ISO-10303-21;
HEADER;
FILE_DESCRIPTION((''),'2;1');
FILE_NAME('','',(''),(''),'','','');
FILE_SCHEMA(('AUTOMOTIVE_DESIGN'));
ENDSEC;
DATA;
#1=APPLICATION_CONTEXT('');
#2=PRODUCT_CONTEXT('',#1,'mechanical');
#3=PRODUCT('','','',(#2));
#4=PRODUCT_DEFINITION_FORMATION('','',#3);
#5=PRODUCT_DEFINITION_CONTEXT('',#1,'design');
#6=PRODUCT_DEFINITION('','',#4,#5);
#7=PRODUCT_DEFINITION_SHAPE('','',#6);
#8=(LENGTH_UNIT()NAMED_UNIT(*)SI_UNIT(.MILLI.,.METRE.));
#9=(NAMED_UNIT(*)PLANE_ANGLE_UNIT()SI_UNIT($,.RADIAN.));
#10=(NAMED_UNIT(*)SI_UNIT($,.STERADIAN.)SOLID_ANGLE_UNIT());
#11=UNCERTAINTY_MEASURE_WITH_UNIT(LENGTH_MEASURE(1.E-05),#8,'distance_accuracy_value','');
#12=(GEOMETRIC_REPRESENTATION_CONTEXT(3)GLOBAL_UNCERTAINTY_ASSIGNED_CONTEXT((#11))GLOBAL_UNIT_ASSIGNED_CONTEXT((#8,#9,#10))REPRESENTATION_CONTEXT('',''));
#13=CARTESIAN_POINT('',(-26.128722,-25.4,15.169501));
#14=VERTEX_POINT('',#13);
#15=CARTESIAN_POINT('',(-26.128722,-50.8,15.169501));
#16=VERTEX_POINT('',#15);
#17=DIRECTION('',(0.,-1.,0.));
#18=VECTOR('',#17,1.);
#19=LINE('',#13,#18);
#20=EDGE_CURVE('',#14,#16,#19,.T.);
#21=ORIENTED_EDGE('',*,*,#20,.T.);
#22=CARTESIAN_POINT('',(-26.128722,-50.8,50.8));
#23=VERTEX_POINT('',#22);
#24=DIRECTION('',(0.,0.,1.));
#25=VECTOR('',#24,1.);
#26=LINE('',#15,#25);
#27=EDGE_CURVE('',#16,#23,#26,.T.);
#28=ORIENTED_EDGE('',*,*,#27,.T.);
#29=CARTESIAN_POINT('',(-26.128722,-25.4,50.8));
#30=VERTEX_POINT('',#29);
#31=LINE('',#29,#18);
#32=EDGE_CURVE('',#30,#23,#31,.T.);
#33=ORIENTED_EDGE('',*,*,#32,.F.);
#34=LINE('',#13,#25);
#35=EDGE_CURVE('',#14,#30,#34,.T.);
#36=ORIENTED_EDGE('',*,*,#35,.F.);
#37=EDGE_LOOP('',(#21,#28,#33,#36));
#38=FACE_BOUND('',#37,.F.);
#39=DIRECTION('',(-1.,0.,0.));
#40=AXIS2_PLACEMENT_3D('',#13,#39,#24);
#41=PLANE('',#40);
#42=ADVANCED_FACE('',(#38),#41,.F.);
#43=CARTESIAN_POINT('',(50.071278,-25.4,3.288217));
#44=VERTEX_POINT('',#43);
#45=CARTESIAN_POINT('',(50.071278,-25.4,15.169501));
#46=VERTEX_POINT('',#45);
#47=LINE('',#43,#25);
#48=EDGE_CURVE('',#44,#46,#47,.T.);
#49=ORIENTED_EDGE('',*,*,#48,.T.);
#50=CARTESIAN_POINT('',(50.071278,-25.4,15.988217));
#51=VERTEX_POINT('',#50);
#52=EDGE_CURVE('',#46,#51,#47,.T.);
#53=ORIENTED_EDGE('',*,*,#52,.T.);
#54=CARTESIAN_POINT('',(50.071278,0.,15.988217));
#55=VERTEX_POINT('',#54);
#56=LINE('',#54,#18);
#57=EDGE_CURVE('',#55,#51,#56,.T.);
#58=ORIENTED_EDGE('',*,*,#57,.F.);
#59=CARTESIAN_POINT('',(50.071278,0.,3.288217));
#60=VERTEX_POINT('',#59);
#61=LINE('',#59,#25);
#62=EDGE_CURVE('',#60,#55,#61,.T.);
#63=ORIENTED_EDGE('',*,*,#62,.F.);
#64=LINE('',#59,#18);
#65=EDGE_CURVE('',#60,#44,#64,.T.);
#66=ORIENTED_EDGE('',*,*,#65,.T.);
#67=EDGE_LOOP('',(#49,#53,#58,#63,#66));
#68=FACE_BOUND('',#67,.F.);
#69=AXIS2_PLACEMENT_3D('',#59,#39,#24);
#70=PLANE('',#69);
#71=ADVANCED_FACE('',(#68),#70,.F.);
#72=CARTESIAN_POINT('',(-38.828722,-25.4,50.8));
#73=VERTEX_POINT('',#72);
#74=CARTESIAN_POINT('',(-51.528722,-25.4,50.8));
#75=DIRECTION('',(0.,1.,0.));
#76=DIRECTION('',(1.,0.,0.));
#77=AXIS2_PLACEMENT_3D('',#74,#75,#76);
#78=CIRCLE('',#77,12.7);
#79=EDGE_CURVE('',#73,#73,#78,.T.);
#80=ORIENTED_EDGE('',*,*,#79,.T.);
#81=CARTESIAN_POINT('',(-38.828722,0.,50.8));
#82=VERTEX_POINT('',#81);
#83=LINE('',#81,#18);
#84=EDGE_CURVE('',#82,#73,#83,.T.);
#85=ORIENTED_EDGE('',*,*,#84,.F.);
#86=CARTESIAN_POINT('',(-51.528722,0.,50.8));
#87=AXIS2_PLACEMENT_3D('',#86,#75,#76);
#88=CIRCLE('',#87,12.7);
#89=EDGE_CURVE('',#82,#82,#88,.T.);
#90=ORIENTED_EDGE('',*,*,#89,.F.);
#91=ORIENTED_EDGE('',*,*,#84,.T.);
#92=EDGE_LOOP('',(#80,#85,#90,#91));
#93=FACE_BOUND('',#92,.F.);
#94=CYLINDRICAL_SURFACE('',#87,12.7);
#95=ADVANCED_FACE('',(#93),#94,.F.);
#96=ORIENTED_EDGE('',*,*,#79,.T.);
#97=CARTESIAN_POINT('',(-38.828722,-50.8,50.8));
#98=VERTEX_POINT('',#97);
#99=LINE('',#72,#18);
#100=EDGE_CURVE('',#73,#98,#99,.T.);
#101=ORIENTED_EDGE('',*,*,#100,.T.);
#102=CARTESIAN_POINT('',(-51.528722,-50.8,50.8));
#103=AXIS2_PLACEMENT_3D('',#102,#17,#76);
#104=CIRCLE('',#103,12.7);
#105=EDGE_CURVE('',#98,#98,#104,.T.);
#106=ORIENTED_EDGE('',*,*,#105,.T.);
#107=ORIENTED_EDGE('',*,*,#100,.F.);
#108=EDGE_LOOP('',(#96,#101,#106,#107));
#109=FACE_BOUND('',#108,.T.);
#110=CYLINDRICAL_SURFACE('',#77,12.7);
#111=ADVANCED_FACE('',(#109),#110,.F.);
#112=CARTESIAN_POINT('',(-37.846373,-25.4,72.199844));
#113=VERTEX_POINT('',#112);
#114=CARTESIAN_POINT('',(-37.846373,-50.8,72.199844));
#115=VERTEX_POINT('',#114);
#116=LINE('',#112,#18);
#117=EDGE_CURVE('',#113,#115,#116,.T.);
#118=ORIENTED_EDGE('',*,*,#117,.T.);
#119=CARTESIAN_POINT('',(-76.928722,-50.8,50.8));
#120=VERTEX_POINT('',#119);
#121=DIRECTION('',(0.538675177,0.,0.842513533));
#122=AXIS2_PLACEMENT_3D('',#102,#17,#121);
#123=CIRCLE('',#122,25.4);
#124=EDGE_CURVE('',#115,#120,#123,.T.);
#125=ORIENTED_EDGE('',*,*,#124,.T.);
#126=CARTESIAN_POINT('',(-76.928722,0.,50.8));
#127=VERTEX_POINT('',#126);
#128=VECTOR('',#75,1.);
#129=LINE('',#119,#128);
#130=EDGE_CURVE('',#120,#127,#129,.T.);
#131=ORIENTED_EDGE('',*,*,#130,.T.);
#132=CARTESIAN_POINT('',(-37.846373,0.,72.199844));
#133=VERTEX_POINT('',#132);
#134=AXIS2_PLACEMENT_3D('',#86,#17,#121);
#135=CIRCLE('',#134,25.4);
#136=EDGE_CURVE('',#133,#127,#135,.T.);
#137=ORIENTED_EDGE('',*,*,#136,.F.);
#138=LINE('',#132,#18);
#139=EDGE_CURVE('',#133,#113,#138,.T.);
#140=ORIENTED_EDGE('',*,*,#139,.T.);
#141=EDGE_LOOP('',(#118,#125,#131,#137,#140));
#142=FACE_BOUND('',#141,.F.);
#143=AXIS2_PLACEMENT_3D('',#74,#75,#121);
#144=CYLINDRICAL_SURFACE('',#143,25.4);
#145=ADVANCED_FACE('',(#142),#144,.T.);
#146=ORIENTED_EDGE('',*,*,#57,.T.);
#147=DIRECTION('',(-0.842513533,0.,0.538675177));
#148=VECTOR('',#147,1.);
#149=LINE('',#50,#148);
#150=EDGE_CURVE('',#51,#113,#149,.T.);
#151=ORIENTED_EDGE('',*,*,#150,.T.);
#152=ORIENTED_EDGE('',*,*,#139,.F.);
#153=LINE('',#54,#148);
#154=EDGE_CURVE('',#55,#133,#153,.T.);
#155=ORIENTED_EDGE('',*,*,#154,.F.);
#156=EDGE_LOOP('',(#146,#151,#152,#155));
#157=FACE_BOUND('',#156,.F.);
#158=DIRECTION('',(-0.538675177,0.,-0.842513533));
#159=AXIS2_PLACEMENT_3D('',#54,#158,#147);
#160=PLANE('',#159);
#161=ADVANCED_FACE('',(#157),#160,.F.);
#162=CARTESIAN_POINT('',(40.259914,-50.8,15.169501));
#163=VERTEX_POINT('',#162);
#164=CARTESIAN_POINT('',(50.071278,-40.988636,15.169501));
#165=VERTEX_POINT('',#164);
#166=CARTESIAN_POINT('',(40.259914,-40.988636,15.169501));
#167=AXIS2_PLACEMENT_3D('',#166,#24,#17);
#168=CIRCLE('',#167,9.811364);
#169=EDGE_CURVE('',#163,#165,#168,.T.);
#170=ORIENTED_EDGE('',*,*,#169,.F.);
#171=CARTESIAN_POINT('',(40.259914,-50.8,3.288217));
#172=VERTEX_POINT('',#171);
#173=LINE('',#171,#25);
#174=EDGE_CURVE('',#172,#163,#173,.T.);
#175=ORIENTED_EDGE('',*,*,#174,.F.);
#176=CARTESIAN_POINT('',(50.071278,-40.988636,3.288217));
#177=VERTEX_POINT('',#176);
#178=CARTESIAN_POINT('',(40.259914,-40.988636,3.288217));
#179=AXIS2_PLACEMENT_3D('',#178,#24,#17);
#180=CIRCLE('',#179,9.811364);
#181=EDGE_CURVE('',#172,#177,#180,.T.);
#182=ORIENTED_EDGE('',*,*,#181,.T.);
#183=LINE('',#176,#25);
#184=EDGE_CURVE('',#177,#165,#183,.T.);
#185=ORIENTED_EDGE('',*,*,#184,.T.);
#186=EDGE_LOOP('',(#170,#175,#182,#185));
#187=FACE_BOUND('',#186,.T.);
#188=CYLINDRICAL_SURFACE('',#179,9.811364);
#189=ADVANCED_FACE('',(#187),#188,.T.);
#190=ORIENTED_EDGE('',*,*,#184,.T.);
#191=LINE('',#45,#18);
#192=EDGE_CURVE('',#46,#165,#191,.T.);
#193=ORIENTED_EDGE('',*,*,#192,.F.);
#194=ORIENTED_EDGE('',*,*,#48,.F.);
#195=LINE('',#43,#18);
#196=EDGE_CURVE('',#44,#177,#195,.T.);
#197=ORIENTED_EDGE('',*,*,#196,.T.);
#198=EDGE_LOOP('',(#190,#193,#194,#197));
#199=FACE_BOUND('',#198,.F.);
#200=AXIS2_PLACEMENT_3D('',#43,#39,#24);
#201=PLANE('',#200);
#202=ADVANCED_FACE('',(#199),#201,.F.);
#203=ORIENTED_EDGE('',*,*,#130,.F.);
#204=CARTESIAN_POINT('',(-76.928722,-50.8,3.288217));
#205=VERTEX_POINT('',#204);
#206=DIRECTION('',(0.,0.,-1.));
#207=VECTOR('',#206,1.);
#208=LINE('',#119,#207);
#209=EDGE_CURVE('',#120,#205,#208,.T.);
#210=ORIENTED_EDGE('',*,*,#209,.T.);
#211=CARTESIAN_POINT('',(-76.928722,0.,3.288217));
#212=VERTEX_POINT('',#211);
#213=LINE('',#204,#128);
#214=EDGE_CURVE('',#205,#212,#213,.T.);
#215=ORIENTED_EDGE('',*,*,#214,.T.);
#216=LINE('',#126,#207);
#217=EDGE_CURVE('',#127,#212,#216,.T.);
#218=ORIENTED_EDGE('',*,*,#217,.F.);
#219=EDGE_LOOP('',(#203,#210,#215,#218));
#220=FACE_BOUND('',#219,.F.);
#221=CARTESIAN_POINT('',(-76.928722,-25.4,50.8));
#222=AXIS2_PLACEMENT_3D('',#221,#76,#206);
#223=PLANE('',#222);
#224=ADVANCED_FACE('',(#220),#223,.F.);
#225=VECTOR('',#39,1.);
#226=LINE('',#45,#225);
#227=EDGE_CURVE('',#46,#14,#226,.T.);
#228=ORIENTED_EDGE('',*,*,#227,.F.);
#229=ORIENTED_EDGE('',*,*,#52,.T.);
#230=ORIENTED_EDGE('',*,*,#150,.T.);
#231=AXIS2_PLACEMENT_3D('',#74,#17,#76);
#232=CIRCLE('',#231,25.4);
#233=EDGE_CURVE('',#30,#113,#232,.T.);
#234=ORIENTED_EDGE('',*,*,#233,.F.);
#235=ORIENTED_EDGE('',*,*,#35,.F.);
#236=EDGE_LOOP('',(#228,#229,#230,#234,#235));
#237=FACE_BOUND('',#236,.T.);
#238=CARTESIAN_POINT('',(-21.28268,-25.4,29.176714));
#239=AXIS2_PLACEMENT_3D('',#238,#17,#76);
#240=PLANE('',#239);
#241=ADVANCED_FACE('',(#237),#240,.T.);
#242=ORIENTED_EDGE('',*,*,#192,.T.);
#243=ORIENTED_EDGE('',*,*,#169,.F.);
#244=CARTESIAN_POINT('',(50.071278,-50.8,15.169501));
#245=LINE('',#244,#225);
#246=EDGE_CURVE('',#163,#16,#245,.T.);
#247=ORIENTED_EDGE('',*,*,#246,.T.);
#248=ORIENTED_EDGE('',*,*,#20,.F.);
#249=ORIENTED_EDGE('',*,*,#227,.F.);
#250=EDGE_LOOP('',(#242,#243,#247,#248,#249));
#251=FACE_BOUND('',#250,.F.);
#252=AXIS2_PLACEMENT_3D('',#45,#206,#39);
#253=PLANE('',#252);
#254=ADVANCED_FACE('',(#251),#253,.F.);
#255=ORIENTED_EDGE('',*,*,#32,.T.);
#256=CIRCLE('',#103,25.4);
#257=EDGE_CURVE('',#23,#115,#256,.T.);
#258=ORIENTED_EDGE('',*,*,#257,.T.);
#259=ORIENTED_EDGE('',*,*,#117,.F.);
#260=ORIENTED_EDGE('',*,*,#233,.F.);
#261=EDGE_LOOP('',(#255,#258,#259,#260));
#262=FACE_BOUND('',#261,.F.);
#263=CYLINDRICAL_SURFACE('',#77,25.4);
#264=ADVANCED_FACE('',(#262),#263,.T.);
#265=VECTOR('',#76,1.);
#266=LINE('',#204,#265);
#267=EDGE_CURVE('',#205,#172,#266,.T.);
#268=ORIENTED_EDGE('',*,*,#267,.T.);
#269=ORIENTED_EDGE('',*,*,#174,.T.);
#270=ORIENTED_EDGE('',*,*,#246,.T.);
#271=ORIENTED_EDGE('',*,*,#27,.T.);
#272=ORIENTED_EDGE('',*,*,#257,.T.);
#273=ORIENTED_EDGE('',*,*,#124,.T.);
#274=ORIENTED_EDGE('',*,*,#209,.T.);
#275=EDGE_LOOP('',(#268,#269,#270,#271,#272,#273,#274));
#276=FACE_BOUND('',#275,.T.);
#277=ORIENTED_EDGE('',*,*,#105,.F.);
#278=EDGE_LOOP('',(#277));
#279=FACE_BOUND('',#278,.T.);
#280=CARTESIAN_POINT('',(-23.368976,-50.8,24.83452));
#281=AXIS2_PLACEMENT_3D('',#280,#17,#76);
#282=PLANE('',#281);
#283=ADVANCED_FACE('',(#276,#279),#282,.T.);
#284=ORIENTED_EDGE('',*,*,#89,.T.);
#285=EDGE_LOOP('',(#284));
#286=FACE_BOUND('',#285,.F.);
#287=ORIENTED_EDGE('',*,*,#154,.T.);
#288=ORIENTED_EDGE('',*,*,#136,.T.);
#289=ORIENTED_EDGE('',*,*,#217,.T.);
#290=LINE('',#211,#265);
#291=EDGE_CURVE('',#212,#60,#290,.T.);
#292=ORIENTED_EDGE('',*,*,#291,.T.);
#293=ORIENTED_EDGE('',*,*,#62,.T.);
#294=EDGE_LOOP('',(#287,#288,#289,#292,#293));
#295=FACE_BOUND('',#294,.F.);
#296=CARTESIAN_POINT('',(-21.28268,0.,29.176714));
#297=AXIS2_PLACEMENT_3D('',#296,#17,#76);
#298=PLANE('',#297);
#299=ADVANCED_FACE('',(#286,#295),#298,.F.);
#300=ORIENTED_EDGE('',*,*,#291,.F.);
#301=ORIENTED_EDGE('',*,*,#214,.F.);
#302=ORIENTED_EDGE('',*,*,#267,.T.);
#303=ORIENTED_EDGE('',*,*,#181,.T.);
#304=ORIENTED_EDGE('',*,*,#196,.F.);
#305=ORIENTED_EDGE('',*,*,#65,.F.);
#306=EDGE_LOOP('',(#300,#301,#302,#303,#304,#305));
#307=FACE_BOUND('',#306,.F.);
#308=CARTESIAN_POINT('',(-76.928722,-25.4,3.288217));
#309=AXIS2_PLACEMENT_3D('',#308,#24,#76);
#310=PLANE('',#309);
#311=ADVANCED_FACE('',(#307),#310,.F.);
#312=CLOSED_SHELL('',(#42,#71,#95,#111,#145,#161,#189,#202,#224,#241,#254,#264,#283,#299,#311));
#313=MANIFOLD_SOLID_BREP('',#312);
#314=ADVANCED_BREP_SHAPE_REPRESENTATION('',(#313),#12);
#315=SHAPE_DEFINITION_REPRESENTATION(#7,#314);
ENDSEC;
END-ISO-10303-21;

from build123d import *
from build123d import SkipClean  # not in build123d's __all__

# Parameters (mm, degrees)
F1_DEPTH = 25.4
F2_R     = 12.7
F3_DEPTH = 25.4
F4_R     = 9.8113639175


with BuildPart() as f1:
    # F0 (on Front) → F1 (new body)
    with BuildSketch(Plane.XZ):
        with BuildLine():
            ThreePointArc((-37.8463725496, 72.1998437426), (-63.7276630417, 73.0788204047), (-76.9287220478, 50.8))
            Line((-76.9287220478, 50.8), (-76.9287220478, 3.2882173546))
            Line((-76.9287220478, 3.2882173546), (50.0712779522, 3.2882173546))
            Line((50.0712779522, 3.2882173546), (50.0712779522, 15.9882173546))
            Line((50.0712779522, 15.9882173546), (-37.8463725496, 72.1998437426))
        make_face()
        with BuildLine():
            ThreePointArc((-64.2287220478, 50.8), (-51.5287220478, 63.5), (-38.8287220478, 50.8))
            ThreePointArc((-38.8287220478, 50.8), (-51.5287220478, 38.1), (-64.2287220478, 50.8))
        make_face(mode=Mode.SUBTRACT)
    extrude(amount=F1_DEPTH)

    # F2 (on face) → F3 (join)
    with BuildSketch(Plane.XZ.offset(25.4)):
        with BuildLine():
            Line((-26.1287220478, 15.9882173546), (-26.1287220478, 50.8))
            ThreePointArc((-26.1287220478, 50.8), (-29.2499016431, 62.9989409939), (-37.8463725496, 72.1998437426))
            ThreePointArc((-37.8463725496, 72.1998437426), (-63.7276630417, 73.0788204047), (-76.9287220478, 50.8))
            Line((-76.9287220478, 50.8), (-76.9287220478, 15.1695013046))
            Line((-76.9287220478, 15.1695013046), (-76.9287220478, 3.2882173546))
            Line((-76.9287220478, 3.2882173546), (50.0712779522, 3.2882173546))
            Line((50.0712779522, 3.2882173546), (50.0712779522, 15.1695013046))
            Line((50.0712779522, 15.1695013046), (-26.1287220478, 15.1695013046))
            Line((-26.1287220478, 15.1695013046), (-26.1287220478, 15.9882173546))
        make_face()
        with Locations((-51.5287220478, 50.8)):
            Circle(F2_R, mode=Mode.SUBTRACT)
    with SkipClean():  # cleaning this boolean's faces spoils the solid; the shape is the same uncleaned
        extrude(amount=F3_DEPTH)

    # F4
    f4_edges = [f1.edges().sort_by_distance(p)[0] for p in [
        (50.071278, -50.8, 9.228859),
    ]]
    fillet(f4_edges, radius=F4_R)


solid = f1.part
